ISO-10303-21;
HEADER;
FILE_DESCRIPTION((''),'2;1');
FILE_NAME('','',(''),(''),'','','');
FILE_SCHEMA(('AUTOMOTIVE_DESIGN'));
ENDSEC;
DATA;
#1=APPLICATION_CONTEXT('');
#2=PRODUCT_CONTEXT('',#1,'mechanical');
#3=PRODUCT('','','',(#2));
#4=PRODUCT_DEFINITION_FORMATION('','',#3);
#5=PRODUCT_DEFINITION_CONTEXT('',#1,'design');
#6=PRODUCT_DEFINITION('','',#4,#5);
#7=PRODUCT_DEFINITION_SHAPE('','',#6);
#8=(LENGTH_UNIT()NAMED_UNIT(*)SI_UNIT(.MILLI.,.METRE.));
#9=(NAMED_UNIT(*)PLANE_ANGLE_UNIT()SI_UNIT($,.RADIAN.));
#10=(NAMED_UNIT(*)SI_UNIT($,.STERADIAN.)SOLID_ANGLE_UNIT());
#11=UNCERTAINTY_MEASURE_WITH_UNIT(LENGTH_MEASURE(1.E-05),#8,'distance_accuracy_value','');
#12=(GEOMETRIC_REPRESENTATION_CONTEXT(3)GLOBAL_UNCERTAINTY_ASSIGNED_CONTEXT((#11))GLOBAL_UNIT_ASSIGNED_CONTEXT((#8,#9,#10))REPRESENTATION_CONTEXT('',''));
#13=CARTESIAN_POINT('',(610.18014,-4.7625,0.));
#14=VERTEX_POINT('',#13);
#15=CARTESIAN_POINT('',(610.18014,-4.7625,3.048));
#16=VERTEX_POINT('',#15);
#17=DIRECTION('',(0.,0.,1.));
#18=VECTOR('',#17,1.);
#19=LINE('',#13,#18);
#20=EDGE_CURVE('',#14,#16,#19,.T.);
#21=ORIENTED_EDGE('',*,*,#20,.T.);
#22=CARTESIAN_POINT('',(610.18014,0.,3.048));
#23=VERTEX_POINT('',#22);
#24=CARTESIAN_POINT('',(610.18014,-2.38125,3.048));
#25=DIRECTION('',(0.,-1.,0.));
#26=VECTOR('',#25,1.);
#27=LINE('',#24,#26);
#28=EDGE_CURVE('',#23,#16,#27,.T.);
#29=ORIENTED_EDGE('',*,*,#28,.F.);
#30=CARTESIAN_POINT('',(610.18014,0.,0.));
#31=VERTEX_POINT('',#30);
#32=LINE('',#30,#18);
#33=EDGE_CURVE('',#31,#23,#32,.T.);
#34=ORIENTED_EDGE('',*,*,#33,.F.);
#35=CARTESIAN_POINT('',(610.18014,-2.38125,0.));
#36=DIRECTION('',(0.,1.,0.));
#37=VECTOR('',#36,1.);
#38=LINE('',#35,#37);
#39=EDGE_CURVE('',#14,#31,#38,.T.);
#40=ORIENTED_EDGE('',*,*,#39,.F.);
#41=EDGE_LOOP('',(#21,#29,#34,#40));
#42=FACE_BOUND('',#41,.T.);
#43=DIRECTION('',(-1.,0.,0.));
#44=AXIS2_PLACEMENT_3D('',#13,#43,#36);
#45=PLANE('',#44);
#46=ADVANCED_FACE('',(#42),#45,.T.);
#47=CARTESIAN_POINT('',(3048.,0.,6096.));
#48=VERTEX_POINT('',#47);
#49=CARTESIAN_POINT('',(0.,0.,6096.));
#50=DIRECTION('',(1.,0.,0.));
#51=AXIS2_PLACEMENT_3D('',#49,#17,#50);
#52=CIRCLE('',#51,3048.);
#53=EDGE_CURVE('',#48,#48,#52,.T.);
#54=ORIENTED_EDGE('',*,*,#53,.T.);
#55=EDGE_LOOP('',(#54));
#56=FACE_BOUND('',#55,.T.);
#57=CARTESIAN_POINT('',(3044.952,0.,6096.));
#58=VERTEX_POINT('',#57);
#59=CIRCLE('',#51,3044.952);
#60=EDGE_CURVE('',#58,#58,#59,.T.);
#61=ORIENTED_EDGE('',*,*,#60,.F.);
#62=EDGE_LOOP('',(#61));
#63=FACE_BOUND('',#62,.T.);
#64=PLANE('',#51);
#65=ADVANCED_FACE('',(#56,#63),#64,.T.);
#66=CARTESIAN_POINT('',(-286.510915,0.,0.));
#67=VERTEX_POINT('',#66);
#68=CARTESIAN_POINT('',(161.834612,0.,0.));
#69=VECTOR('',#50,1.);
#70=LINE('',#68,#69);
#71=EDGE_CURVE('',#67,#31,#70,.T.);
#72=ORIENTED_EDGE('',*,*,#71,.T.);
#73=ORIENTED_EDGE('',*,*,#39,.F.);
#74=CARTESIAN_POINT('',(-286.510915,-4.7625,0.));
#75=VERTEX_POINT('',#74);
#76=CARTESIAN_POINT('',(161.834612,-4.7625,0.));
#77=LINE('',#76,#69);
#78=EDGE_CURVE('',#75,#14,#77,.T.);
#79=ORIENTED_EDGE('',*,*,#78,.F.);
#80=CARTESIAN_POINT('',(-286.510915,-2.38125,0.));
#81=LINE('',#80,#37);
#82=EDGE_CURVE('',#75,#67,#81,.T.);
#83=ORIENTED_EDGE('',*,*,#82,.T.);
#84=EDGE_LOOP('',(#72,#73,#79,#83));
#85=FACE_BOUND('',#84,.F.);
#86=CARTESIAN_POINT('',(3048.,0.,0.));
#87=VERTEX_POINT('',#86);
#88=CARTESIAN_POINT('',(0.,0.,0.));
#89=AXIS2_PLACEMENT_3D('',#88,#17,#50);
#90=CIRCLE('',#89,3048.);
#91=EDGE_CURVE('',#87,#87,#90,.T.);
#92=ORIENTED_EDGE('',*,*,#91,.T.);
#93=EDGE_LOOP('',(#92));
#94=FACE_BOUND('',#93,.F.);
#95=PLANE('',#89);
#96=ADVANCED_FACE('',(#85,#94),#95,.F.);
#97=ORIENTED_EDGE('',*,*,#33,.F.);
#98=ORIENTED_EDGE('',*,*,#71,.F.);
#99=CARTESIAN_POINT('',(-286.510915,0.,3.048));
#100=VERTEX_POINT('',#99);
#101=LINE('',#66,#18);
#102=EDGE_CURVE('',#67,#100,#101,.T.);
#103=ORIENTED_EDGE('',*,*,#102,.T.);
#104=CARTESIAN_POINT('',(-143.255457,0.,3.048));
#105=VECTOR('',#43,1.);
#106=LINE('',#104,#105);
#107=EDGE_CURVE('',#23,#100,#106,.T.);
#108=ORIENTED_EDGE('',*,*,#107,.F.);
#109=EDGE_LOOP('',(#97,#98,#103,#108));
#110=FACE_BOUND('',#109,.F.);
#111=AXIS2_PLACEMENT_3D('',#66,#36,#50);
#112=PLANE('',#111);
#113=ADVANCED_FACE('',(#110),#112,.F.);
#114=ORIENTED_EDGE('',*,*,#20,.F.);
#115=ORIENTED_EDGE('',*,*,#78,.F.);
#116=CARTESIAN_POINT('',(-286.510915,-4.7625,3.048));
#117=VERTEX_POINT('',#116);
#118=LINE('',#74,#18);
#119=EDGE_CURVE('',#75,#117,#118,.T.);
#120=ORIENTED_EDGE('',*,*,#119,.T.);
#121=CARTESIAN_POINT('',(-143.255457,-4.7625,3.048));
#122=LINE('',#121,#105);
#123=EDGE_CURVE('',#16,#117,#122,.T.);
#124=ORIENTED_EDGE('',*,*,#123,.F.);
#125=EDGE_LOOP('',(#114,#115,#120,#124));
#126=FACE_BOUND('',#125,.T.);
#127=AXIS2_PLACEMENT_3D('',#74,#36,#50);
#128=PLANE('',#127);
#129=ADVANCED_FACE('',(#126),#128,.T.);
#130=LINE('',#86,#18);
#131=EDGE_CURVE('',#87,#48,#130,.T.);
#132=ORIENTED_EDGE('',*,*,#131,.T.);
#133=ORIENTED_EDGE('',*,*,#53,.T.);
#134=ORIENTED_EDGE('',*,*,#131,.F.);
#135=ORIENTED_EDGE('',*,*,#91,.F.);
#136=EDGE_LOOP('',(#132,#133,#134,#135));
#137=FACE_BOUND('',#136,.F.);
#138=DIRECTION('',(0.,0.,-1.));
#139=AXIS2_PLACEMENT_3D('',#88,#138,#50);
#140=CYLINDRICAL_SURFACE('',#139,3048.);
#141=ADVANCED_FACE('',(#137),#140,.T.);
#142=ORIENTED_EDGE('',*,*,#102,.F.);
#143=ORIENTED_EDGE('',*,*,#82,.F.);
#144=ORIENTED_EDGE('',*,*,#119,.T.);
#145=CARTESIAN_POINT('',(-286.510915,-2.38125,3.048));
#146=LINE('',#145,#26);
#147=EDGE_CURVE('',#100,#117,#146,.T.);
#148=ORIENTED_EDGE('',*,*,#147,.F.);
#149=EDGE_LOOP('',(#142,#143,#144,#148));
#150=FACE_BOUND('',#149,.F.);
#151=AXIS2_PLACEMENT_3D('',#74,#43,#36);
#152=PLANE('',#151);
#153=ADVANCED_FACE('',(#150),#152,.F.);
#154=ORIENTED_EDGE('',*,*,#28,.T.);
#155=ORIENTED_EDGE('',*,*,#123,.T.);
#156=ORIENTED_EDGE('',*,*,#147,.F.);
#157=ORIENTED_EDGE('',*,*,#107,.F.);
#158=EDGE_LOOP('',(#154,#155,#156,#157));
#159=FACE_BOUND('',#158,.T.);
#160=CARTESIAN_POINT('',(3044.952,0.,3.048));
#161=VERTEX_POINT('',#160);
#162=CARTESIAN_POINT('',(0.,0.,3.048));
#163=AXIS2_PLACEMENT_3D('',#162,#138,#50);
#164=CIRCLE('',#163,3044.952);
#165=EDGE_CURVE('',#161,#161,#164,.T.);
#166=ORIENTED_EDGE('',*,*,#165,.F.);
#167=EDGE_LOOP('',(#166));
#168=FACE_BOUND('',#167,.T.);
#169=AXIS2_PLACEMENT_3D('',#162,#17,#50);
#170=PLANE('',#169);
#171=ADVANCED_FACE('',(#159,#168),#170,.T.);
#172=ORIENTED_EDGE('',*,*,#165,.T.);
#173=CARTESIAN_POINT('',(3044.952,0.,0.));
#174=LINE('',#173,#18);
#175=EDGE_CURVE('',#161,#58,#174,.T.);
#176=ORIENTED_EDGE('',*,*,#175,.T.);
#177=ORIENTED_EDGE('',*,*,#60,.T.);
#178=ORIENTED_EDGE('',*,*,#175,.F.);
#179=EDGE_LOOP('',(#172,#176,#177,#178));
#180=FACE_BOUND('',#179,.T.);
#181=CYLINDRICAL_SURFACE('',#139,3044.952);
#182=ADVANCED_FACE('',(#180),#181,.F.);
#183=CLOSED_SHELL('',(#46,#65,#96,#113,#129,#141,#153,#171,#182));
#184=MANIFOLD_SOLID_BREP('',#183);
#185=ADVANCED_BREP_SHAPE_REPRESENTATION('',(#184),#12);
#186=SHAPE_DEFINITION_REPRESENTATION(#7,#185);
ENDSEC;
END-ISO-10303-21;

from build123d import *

# Parameters (mm, degrees)
F0_R     = 3048
F1_DEPTH = 6096
F2_T     = -3.048
F6_W     = 896.6910541058
F6_H     = 4.7625
F7_DEPTH = 1734.81703


# Not quite as in the source:
# - the program builds the solid bodies; features that only make, move or delete a surface that nothing else refers to are left out


with BuildPart() as f1:
    # F0 (on Top) → F1 (new body)
    with BuildSketch(Plane.XY):
        Circle(F0_R)
    extrude(amount=F1_DEPTH)

    # F2
    f2_openings = [f1.faces().sort_by_distance(p)[0] for p in [
        (0, 0, 6096),
    ]]
    offset(amount=F2_T, openings=f2_openings)

    # F6 (on Top) → F7 (cut)
    with BuildSketch(Plane.XY):
        with Locations((161.8346124887, -2.38125)):
            Rectangle(F6_W, F6_H)
    extrude(amount=F7_DEPTH, mode=Mode.SUBTRACT)


solid = f1.part
